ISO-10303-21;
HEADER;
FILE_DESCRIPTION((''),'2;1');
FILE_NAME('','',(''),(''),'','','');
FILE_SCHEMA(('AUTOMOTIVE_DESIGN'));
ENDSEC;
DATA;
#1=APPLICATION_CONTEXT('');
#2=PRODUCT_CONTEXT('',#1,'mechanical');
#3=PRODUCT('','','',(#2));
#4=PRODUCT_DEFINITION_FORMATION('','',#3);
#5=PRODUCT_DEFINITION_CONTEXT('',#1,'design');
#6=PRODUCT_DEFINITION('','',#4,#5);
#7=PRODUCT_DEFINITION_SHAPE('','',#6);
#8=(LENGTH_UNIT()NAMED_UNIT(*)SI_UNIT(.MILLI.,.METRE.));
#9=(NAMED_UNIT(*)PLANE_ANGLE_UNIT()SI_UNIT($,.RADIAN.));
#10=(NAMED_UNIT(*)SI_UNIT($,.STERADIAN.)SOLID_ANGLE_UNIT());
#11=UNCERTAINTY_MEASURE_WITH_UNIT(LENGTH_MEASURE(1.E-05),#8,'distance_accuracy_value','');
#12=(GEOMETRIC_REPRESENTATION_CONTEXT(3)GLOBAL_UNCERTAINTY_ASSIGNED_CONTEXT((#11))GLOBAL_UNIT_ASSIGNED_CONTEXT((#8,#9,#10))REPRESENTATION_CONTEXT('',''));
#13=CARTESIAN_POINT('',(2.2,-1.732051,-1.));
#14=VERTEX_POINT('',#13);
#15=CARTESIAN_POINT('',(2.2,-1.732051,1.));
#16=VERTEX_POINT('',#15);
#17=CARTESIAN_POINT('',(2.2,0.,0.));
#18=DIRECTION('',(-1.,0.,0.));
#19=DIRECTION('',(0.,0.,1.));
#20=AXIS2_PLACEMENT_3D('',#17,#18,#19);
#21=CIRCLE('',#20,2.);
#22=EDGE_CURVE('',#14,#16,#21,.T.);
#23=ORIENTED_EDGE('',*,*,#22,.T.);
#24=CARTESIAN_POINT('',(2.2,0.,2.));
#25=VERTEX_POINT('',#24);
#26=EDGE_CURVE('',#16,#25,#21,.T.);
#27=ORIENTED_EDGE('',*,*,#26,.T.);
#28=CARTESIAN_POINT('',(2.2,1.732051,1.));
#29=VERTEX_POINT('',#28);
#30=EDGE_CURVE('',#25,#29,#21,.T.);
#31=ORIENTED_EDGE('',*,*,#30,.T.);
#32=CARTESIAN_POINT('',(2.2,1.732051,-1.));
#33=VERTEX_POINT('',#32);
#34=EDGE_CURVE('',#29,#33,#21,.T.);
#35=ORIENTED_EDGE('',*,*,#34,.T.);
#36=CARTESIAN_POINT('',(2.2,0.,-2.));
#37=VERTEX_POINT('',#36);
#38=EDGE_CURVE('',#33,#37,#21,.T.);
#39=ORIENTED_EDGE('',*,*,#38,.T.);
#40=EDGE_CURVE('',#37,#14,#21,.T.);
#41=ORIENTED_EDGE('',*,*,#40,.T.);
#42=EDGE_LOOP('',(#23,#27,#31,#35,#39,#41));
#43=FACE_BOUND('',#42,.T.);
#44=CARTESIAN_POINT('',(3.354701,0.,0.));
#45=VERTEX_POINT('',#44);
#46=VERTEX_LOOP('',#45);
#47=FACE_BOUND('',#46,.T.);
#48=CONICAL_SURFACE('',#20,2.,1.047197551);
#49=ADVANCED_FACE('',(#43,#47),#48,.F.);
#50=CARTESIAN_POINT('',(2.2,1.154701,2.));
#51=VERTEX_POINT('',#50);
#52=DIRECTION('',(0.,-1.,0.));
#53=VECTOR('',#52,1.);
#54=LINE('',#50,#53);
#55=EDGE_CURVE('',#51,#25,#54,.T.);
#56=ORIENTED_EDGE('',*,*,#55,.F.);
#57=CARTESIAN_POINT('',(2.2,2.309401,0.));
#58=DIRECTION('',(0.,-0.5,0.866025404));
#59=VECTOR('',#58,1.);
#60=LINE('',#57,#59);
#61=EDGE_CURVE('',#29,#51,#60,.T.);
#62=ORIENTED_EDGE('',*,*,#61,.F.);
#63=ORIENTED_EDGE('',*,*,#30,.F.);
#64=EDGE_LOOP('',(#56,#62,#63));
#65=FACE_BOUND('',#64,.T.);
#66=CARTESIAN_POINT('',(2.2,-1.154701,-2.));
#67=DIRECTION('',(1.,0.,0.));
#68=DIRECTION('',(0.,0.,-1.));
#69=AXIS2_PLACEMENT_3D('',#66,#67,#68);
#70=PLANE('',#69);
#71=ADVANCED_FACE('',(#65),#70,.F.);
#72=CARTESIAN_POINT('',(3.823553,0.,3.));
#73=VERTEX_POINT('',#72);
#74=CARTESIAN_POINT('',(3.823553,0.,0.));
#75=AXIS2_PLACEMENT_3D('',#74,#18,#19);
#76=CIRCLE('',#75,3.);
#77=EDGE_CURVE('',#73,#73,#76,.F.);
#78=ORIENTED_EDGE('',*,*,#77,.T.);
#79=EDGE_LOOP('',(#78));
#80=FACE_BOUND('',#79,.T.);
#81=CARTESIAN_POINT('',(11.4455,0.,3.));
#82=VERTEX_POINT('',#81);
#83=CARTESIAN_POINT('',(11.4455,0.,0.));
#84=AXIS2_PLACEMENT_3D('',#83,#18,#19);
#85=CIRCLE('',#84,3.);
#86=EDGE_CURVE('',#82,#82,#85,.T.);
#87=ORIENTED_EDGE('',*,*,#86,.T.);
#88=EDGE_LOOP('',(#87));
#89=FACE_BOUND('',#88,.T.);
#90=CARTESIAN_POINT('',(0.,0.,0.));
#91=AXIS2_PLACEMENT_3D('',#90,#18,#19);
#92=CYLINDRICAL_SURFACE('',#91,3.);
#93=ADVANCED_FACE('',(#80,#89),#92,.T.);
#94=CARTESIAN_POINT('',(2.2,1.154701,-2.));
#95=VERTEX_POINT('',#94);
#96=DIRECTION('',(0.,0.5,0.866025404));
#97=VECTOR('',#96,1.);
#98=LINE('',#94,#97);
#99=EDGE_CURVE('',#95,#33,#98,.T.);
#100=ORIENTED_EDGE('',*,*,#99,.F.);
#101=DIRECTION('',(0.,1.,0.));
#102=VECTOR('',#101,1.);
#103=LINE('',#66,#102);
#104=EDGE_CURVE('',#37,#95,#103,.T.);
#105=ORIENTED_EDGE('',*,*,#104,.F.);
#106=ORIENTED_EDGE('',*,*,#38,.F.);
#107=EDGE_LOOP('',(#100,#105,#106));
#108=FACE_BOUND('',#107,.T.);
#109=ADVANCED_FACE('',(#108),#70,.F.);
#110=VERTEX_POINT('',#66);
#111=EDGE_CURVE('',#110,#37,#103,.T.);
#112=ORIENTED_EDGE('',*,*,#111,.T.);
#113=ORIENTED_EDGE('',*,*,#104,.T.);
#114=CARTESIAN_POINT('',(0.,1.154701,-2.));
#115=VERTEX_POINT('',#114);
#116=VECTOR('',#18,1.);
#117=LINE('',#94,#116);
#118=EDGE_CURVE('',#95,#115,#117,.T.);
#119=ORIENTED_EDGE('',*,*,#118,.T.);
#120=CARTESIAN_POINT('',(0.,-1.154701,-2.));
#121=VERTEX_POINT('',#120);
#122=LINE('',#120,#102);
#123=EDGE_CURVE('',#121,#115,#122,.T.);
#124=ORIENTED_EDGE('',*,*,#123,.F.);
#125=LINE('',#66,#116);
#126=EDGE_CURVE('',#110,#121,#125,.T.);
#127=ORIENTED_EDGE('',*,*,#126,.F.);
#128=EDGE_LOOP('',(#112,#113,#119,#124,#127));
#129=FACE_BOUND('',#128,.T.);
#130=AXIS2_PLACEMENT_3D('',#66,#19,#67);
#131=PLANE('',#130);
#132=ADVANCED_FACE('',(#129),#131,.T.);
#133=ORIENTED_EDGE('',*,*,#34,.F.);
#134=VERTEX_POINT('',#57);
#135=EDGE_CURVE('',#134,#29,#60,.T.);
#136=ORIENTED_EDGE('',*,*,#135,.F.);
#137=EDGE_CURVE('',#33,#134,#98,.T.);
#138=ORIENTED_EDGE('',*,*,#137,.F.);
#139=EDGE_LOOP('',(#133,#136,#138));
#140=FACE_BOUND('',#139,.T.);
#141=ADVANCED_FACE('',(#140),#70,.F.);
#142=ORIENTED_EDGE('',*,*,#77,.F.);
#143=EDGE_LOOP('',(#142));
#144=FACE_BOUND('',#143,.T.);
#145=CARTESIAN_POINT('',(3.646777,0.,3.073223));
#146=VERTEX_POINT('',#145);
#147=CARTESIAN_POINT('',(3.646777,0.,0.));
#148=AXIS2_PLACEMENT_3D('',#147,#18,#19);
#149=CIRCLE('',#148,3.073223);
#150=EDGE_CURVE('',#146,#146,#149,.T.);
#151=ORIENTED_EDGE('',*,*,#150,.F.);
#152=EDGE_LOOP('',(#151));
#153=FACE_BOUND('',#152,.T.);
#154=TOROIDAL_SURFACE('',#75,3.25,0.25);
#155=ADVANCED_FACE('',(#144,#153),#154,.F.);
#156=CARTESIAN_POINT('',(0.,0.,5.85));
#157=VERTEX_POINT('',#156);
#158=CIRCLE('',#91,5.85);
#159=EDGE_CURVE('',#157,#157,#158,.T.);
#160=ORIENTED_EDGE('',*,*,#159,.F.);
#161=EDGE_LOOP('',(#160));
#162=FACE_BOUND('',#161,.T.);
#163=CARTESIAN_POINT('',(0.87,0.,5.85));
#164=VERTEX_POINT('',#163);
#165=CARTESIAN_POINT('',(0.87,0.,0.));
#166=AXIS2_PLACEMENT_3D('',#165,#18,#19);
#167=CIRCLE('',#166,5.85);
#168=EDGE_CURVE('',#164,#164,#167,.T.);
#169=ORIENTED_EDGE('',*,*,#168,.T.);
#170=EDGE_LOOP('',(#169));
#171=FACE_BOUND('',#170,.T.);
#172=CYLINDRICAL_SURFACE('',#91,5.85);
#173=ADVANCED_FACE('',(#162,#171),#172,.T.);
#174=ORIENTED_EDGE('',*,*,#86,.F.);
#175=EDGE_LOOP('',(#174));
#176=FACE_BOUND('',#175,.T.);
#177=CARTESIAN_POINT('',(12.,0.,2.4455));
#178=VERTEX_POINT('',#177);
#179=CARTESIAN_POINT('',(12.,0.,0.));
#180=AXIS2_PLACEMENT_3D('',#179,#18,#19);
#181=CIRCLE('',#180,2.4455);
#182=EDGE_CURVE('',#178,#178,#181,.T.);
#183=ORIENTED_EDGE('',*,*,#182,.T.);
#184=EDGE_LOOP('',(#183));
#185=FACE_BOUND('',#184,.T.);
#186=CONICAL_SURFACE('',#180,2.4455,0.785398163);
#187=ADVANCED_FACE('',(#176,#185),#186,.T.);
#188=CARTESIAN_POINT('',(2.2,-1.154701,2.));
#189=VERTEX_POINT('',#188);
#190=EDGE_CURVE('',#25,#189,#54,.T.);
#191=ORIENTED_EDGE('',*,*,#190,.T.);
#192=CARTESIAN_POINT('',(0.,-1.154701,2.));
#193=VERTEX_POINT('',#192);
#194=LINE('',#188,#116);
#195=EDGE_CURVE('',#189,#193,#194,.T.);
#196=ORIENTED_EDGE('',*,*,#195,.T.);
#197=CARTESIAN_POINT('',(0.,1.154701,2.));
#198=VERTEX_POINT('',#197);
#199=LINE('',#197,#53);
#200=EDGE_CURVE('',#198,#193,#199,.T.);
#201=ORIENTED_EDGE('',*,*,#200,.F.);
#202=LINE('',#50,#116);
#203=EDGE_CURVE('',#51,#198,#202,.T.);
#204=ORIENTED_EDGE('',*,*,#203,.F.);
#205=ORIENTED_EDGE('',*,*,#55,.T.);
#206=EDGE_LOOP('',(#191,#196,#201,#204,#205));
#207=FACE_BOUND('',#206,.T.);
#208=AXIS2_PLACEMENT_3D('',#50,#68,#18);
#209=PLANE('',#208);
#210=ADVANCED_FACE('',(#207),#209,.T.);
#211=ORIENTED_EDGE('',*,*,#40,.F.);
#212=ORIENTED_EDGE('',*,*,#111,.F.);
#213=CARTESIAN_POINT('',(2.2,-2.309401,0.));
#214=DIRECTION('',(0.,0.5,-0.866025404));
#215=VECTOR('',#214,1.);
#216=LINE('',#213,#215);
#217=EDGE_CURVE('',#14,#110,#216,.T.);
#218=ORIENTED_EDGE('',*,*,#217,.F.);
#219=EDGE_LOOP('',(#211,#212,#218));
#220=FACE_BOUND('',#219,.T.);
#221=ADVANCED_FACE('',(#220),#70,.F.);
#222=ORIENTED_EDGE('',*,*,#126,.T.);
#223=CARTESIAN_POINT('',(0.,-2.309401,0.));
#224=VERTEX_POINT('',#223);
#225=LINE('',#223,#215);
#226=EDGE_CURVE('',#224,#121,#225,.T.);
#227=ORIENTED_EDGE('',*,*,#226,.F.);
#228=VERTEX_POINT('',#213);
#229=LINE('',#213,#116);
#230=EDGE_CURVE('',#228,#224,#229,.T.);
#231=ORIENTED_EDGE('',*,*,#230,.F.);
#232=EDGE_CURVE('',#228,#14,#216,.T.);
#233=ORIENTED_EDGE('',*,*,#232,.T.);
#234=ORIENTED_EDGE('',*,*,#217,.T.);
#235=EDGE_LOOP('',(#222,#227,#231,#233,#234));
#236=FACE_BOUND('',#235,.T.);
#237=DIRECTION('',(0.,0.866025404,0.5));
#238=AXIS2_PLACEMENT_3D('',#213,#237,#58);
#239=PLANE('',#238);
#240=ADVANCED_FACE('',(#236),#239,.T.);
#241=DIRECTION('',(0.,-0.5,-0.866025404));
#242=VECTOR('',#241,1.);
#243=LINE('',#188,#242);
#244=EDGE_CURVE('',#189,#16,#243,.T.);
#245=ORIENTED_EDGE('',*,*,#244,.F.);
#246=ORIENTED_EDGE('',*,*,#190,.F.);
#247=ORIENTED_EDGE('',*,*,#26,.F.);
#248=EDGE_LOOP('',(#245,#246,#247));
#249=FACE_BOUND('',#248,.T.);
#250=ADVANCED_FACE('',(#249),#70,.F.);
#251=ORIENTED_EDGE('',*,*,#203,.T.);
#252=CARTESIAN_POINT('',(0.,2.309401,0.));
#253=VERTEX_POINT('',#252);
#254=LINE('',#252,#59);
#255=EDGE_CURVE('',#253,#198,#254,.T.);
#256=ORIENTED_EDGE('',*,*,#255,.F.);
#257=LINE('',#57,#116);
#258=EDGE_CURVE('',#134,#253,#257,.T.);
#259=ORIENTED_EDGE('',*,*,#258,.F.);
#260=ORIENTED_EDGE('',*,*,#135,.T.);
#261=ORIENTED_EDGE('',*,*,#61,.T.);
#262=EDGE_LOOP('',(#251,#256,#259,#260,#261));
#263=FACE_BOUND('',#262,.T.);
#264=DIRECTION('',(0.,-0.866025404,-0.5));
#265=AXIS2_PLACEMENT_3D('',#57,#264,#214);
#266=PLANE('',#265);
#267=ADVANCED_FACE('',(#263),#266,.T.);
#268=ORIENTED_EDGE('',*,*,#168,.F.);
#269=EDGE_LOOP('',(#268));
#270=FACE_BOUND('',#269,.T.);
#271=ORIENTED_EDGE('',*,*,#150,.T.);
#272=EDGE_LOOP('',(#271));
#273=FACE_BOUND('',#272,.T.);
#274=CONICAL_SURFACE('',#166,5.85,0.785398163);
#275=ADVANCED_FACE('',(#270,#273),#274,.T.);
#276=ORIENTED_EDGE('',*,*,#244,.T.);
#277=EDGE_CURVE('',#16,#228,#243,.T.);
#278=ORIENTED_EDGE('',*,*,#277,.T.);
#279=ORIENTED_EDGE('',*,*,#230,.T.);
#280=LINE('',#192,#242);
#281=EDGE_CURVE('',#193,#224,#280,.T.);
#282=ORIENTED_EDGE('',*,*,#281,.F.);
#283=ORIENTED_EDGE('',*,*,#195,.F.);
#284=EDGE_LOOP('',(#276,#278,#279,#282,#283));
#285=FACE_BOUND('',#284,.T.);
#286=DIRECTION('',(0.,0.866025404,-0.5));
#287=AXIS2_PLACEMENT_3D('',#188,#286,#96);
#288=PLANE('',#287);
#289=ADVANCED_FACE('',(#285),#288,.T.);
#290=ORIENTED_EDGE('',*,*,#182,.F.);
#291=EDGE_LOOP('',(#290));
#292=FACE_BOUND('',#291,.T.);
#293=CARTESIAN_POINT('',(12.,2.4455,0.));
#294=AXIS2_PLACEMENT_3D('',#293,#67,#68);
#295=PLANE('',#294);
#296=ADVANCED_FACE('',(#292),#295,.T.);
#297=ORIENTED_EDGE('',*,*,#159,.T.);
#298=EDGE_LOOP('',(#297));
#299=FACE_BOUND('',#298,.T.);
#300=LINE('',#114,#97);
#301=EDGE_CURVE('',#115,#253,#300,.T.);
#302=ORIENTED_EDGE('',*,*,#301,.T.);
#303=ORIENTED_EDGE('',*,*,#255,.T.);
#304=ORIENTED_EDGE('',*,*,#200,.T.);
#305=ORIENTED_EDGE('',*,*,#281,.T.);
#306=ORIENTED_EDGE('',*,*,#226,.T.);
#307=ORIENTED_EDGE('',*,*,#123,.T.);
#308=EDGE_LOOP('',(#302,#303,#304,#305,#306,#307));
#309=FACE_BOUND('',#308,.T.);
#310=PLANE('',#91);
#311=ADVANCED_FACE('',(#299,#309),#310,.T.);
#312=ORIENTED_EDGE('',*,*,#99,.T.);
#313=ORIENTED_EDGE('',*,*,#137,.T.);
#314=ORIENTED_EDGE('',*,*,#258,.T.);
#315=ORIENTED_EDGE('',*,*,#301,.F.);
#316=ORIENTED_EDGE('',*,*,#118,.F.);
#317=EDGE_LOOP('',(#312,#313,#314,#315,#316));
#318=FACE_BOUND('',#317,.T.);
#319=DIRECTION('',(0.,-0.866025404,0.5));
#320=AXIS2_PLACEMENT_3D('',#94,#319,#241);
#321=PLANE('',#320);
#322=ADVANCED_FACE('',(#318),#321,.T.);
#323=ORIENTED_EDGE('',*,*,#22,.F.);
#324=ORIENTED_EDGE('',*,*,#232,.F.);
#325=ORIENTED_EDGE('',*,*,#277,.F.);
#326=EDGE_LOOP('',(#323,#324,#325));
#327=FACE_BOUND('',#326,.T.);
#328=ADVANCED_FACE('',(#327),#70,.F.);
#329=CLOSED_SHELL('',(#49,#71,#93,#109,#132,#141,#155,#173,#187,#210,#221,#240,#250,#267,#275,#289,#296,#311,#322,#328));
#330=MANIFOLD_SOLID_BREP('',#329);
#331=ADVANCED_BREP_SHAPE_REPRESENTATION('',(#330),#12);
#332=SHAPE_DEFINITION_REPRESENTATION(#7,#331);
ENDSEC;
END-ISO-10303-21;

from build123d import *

# Parameters (mm, degrees)
FILLET1_R   = 0.25
HEX_START   = -2.2
HEX_2_DEPTH = 2.2


with BuildPart() as part:
    # BodySke → BaseBody (revolve)
    with BuildSketch(Plane.XY, mode=Mode.PRIVATE) as basebody_sk:
        Polygon((0, 0), (0, 5.85), (0.87, 5.85), (3.72, 3), (11.4455, 3), (12, 2.4455), (12, 0), align=None)
    revolve(basebody_sk.sketch.rotate(Axis((0, 0, 0), (1, 0, 0)), 90), axis=Axis((0, 0, 0), (1, 0, 0)))

    # Fillet1
    fillet1_edges = [part.edges().sort_by_distance(p)[0] for p in [
        (3.72, 0, -3),
    ]]
    fillet(fillet1_edges, radius=FILLET1_R)

    # Hex 2: read off the stored shape, not the designer's step
    # Hex 2 outline → Hex 2 (cut)
    with BuildSketch(Plane.ZY.offset(HEX_START)):
        Polygon((-2, -1.154700538), (0, -2.309401077), (2, -1.154700538), (2, 1.154700538), (0, 2.309401077), (-2, 1.154700538), align=None)
    extrude(amount=HEX_2_DEPTH, mode=Mode.SUBTRACT)

    # Hex 2 2 outline → Hex 2 2 (revolve, cut)
    with BuildSketch(Plane.YX):
        Polygon((2, 2.2), (0, 3.354700538), (0, 2.2), align=None)
    revolve(axis=Axis((0, 0, 0), (1, 0, 0)), mode=Mode.SUBTRACT)


solid = part.part
